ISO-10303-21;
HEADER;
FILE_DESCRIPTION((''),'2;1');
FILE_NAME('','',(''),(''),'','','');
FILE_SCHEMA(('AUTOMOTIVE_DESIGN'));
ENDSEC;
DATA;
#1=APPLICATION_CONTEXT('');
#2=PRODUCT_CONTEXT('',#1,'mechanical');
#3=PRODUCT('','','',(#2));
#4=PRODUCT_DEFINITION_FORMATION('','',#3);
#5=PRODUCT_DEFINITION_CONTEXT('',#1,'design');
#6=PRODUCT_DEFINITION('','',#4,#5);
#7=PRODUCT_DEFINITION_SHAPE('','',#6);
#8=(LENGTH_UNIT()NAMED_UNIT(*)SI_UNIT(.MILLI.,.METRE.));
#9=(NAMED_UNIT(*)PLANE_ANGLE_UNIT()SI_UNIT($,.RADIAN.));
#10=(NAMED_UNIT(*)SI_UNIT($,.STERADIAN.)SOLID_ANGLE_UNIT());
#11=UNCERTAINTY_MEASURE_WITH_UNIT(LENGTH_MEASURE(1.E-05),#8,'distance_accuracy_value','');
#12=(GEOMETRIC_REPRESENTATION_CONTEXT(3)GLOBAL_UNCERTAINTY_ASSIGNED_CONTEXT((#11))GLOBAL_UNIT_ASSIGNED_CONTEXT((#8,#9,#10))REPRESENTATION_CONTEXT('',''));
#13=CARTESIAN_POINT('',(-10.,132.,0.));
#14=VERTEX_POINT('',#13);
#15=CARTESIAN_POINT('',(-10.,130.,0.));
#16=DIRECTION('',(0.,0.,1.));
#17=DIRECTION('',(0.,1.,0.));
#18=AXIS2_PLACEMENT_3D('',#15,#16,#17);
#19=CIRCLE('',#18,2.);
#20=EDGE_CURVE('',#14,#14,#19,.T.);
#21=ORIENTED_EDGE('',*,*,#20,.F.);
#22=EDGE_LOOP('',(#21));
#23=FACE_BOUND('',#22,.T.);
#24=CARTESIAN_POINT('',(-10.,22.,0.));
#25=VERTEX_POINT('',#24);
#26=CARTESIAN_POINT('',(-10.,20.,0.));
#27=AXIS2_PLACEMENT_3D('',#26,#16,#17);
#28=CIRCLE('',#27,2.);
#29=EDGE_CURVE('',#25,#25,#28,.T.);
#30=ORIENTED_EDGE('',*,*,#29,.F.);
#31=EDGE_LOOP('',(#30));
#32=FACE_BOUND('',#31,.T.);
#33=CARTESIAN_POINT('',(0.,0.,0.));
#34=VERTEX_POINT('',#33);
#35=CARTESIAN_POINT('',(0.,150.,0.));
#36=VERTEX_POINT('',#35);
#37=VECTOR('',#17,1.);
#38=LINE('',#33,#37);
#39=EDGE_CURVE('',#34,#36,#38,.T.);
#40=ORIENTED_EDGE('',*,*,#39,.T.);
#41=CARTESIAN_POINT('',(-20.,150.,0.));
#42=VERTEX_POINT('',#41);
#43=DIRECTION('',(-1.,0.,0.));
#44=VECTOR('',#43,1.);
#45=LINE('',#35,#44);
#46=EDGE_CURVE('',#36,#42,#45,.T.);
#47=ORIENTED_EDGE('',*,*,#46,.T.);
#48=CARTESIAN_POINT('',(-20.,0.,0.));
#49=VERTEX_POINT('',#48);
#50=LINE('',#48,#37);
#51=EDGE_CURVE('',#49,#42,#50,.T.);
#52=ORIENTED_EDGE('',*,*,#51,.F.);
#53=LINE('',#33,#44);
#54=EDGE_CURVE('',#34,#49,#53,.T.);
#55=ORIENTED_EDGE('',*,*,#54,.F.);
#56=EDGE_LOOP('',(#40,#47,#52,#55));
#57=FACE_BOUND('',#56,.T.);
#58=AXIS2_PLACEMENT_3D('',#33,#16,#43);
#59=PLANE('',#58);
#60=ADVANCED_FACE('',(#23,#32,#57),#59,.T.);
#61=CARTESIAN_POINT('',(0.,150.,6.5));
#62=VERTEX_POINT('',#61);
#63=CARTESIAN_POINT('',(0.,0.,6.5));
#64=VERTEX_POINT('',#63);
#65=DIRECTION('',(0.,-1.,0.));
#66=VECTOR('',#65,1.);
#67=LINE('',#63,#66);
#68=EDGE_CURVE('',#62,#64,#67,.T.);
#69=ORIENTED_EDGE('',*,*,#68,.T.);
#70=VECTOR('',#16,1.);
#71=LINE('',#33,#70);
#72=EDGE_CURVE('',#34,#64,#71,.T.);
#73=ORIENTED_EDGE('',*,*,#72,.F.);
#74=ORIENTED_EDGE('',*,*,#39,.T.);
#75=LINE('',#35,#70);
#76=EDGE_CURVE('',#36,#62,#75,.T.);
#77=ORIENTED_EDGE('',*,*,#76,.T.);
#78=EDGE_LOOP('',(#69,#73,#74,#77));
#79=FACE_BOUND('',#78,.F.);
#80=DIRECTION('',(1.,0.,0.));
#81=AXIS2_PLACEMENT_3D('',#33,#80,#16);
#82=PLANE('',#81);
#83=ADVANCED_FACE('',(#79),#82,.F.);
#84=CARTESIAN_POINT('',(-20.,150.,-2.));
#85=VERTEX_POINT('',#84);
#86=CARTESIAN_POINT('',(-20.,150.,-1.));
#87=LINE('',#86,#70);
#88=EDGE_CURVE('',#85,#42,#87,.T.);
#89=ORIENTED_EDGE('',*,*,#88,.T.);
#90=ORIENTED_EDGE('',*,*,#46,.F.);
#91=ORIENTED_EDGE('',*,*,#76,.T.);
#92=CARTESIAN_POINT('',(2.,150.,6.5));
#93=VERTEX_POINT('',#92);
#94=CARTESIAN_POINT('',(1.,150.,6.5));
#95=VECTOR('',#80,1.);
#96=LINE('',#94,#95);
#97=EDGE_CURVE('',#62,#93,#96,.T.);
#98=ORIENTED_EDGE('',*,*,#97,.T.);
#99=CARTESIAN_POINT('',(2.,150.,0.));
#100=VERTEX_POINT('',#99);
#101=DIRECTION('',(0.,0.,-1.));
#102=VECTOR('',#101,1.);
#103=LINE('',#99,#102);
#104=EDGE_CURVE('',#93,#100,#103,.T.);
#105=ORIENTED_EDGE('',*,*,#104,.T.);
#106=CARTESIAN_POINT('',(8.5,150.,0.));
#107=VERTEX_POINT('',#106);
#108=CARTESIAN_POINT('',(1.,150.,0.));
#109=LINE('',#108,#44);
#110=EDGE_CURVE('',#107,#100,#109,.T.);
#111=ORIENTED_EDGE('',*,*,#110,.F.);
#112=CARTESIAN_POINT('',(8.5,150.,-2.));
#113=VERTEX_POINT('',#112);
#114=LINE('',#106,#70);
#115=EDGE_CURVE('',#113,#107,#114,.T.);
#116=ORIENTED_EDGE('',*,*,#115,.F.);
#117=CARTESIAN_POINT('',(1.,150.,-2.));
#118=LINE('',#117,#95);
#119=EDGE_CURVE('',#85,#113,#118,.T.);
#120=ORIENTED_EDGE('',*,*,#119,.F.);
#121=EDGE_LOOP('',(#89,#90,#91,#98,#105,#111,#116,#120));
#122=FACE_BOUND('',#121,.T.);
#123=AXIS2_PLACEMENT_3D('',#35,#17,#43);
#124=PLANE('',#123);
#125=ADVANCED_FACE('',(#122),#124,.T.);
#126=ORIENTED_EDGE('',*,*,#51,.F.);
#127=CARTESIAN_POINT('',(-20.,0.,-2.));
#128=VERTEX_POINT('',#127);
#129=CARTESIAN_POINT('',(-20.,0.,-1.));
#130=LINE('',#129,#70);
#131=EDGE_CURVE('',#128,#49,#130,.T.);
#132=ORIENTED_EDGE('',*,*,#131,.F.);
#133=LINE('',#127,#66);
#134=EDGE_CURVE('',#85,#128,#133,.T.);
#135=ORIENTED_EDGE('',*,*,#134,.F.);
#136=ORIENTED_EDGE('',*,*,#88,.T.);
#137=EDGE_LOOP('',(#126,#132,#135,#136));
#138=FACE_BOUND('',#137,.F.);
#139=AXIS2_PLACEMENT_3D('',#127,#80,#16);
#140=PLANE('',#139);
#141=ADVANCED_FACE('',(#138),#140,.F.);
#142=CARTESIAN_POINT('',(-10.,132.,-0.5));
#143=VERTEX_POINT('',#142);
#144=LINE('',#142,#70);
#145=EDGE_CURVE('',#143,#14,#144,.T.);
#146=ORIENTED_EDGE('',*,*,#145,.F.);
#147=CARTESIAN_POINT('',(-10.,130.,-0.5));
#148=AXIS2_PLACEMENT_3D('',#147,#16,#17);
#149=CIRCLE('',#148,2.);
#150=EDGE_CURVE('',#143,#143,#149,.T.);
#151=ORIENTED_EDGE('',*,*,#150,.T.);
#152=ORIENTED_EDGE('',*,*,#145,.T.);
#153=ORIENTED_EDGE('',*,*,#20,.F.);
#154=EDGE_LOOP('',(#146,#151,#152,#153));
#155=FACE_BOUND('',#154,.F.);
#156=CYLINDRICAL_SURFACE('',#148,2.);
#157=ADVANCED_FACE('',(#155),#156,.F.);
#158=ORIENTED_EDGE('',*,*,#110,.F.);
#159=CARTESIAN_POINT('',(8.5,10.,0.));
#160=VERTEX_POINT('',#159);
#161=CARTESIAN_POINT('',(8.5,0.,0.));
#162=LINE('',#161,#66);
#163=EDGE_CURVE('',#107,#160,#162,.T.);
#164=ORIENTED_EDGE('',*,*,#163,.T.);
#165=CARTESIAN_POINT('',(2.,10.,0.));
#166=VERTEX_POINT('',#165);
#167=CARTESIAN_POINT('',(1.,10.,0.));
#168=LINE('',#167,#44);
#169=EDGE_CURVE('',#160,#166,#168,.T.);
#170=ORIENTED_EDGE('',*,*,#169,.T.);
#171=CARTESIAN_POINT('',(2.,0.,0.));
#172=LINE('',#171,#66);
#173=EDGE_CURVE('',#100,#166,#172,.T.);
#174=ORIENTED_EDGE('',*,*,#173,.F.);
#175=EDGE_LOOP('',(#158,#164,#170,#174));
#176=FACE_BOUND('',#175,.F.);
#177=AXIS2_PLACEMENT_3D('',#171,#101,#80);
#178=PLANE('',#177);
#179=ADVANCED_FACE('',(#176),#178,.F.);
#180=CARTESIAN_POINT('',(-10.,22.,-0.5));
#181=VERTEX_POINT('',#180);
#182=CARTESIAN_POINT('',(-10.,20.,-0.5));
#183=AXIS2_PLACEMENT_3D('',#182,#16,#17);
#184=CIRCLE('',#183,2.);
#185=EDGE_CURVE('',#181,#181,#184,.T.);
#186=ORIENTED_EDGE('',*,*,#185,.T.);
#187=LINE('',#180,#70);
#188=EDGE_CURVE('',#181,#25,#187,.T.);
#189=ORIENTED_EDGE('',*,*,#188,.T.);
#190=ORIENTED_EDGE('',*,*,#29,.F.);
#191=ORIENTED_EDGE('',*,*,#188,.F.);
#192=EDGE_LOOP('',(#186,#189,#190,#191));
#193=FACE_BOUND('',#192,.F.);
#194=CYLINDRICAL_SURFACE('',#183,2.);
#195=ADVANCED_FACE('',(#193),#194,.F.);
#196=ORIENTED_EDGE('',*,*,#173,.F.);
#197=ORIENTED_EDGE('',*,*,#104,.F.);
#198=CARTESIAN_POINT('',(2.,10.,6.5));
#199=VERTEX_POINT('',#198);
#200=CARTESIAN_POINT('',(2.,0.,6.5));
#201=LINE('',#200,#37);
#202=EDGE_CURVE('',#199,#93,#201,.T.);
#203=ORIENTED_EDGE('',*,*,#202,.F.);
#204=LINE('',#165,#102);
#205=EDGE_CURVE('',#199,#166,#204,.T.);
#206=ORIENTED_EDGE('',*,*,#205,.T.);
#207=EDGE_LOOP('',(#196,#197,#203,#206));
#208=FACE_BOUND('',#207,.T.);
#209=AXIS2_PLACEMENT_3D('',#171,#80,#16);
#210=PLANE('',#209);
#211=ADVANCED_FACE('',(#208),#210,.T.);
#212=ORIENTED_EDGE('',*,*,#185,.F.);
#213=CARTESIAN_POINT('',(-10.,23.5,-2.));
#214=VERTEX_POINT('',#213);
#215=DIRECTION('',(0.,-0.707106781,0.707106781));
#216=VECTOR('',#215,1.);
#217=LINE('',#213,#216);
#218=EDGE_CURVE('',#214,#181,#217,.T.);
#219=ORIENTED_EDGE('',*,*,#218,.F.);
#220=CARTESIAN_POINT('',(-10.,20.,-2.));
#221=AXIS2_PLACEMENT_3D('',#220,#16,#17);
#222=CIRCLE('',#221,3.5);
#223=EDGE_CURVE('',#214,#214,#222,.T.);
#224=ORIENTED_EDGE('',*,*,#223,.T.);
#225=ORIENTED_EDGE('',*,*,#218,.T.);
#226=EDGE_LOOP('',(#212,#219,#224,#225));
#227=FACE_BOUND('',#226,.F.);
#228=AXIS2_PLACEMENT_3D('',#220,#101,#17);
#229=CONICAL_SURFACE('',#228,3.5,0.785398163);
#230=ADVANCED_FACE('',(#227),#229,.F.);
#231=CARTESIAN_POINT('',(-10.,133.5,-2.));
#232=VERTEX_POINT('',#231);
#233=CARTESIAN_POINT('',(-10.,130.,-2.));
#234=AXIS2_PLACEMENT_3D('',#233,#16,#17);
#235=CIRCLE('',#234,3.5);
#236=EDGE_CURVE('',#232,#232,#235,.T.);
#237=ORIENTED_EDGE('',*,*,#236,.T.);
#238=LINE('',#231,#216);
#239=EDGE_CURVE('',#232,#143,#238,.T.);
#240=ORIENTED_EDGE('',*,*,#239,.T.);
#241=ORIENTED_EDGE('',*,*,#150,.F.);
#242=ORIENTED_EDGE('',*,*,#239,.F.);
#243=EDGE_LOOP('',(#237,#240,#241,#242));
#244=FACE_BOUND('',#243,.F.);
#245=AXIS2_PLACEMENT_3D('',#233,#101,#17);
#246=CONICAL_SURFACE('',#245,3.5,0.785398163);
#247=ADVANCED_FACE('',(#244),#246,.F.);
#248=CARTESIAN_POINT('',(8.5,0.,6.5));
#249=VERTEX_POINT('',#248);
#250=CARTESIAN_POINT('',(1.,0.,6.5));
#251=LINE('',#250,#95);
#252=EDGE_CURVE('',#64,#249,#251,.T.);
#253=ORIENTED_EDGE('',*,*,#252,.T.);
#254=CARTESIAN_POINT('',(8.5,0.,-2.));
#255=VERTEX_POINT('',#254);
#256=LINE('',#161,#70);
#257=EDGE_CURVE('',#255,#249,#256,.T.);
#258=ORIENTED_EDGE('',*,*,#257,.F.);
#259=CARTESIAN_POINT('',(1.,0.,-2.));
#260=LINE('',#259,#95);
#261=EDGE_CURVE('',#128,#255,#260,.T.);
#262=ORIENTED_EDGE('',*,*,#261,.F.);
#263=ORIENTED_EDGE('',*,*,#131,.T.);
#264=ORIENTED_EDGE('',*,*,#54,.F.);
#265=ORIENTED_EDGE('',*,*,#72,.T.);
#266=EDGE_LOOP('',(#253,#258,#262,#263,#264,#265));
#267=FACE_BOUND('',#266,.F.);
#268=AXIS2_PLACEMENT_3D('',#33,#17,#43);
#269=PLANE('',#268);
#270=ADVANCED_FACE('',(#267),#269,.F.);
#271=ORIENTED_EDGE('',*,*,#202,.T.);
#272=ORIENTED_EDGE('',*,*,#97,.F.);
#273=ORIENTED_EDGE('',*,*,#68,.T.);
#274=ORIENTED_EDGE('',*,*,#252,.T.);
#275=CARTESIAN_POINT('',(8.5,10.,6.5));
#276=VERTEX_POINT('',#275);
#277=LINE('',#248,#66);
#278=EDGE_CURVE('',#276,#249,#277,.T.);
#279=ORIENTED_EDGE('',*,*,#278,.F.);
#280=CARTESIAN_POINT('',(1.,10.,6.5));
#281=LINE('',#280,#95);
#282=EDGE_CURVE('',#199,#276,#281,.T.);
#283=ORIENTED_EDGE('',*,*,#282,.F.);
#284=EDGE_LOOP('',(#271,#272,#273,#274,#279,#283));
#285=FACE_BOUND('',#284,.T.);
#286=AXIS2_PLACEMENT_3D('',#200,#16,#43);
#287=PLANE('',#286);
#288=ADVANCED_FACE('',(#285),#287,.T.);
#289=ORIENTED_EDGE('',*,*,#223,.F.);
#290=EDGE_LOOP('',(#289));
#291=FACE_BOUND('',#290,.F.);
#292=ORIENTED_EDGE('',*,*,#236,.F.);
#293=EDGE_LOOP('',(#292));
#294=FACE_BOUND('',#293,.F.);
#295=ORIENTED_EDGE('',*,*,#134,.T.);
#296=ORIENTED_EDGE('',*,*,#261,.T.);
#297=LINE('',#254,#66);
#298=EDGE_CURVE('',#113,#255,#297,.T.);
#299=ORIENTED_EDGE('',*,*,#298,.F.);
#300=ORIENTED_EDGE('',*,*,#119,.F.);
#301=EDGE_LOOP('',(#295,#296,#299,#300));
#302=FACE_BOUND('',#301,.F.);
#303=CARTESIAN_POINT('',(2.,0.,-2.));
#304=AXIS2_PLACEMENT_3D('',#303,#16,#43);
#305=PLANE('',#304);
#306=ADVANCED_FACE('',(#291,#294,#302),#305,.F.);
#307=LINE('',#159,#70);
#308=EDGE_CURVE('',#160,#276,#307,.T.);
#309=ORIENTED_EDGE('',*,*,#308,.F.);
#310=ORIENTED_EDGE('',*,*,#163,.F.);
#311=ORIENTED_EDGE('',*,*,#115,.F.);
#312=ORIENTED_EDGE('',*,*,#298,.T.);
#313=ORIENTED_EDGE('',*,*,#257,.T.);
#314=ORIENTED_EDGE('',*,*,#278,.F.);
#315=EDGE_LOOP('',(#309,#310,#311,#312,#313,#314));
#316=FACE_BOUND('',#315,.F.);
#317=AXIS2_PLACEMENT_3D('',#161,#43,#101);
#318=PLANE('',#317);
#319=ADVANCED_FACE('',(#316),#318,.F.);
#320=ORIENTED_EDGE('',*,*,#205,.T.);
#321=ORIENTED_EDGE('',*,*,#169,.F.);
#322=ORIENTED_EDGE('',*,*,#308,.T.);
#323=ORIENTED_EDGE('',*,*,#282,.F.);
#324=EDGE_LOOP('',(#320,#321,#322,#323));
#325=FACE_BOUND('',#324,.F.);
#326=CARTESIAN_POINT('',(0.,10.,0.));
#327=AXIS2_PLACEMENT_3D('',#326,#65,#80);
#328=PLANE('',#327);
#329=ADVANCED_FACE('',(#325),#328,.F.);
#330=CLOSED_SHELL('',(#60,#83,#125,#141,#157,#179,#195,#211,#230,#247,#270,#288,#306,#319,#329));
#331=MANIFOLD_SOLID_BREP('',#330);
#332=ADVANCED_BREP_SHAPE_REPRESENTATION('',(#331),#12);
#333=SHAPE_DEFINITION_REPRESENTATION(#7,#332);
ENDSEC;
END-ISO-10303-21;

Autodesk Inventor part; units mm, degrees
ref_plane "YZ Plane" through (0, 0, 0) normal (1, 0, 0) x (0, 1, 0)
ref_plane "XZ Plane" through (0, 0, 0) normal (0, 1, 0) x (-1, 0, 0)
ref_plane "XY Plane" through (0, 0, 0) normal (0, 0, 1) x (1, 0, 0)
sketch "Sketch1" plane through (0, 0, 0) normal (0, 1, 0) x (-1, 0, 0)
  line L0 (0, 0) -> (0, 6.5)
  line L1 (0, 0) -> (20, 0)
  line L2 (-2, -2) -> (20, -2)
  line L3 (-2, 0) -> (-2, 6.5)
  line L4 (20, -2) -> (20, 0)
  line L5 (-2, 0) -> (-8.5, 0)
  line L6 (-8.5, -2) -> (-2, -2)
  line L7 (-8.5, 0) -> (-8.5, -2)
  line L8 (-2, 6.5) -> (0, 6.5)
  dimension "d2" = 20
  dimension "d3" = 2
  dimension "d5" = 2
  dimension "d30" = 6.5
  dimension "d33" = 6.5
extrude "Extrusion1" add sketch "Sketch1" along normal blind 40
sketch "Sketch2" plane through (0, 0, 0) normal (0, -1, 0) x (1, 0, 0)
  line L0 (2, 0) -> (8.5, 0)
  line L1 (8.5, 0) -> (8.5, 6.5)
  line L2 (8.5, 6.5) -> (2, 6.5)
  line L3 (2, 6.5) -> (2, 0)
  point P0 (0, 0)
  dimension "d10" = 6.5
  dimension "d11" = 6.5
extrude "Extrusion2" add sketch "Sketch2" against normal blind 10
move faces "Move1" translate (0, 110, 0) faces at (-3.8333, 40, -1.3333)
sketch "Sketch3" plane through (22, 0, -2) normal (0, 0, -1) x (-1, 0, 0)
  line L0 (42, 0) -> (42, 40) projected
  circle A0 centre (32, 20) radius 3.5
  circle A1 centre (32, 20) radius 2
  line L1 (32, 20) -> (42, 20)
  line L2 (42, 0) -> (42, 40) projected
  line L3 (32, 20) -> (32, 130)
  point P0 (22, 0)
  dimension "d15" = 7
  dimension "d18" = 4
  dimension "d32" = 10
  dimension "d37" = 110
hole "Hole1" at (-10, 20, -2) at (-10, 130, -2) direction (0, 0, 1) diameter 4 end through all countersink diameter 7 countersink angle 90
properties part number "3DPrintBracket_Tall" material "PC/ABS Plastic"
